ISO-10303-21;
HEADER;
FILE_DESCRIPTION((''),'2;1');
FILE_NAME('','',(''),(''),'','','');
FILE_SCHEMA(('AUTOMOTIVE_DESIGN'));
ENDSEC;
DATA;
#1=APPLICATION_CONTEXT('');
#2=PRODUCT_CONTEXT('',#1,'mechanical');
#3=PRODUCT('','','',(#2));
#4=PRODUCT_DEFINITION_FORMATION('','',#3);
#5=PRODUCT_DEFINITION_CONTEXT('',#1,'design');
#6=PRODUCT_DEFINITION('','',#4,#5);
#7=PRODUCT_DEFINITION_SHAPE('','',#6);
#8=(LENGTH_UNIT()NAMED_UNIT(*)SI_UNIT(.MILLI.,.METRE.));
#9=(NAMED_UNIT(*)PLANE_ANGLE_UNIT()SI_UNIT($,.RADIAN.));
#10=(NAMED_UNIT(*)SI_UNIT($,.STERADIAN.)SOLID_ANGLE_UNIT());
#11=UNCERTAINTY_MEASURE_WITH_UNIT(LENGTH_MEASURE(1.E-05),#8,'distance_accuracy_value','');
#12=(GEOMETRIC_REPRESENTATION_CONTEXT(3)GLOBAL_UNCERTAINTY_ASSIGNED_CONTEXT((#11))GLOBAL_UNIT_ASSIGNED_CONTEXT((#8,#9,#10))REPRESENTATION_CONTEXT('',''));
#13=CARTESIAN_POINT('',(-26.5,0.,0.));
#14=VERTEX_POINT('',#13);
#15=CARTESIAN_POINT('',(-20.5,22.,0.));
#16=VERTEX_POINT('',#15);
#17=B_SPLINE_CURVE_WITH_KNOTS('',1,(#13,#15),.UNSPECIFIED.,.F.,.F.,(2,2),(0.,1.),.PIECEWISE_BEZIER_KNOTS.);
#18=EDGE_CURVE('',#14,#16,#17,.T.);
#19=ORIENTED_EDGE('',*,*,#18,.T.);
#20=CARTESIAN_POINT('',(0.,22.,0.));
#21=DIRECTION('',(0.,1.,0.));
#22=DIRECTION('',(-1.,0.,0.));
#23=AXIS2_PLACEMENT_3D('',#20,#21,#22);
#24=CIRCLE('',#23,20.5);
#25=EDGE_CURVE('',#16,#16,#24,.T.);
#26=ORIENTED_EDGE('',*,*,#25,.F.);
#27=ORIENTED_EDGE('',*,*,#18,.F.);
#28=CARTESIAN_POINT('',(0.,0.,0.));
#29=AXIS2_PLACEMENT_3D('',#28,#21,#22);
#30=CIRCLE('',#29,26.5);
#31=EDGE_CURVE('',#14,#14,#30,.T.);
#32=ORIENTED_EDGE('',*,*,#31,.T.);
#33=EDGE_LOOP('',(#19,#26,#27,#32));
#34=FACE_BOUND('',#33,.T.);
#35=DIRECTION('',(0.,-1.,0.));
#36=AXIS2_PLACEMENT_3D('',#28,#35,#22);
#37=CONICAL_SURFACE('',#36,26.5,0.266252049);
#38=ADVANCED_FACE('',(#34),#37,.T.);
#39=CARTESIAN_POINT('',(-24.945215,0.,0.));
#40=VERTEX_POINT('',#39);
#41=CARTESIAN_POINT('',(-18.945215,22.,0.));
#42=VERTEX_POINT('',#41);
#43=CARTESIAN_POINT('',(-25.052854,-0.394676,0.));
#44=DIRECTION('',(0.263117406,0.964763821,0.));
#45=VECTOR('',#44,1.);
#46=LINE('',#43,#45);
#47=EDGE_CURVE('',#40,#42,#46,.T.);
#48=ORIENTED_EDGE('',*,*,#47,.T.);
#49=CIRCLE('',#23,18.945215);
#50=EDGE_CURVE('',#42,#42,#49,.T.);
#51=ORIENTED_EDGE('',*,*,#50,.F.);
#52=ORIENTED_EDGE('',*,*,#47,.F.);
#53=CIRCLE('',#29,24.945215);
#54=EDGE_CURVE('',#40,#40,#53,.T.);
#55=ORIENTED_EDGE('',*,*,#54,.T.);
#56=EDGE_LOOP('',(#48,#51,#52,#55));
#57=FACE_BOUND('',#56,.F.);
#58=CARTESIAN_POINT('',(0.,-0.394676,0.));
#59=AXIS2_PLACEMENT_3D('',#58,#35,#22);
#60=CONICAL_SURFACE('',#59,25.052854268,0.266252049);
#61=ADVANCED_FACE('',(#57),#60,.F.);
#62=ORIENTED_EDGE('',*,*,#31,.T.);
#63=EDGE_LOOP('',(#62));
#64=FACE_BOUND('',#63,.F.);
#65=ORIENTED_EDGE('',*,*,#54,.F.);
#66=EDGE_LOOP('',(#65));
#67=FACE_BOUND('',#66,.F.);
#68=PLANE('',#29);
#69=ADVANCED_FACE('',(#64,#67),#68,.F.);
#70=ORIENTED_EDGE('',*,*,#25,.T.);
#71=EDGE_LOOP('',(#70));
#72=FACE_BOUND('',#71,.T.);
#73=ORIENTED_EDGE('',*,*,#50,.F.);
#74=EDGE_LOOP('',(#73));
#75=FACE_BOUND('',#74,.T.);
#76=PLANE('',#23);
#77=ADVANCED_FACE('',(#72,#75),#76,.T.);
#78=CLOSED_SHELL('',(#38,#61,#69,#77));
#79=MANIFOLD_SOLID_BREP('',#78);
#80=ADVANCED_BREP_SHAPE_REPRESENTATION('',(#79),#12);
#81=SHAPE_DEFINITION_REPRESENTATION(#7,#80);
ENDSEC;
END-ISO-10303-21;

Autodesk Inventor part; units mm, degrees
ref_plane "YZ Plane" through (0, 0, 0) normal (1, 0, 0) x (0, 1, 0)
ref_plane "XY Plane" through (0, 0, 0) normal (0, 0, 1) x (1, 0, 0)
sketch "Szkic6" plane through (0, 0, 0) normal (0, 1, 0) x (-1, 0, 0)
  circle A0 centre (0, 0) radius 26.5
  dimension "d33" = 53
ref_plane "Płaszczyzna konstrukcyjna1" through (0, 22, 0) normal (0, 1, 0) x (-1, 0, 0)
sketch "Szkic7" plane through (0, 22, 0) normal (0, 1, 0) x (-1, 0, 0)
  circle A0 centre (0, 0) radius 20.5
  dimension "d35" = 41
loft "Wyciągnięcie złożone1" add profiles "Szkic6", "Szkic7"
shell "Skorupa1" thickness 1.5 removed faces 2 at (-3.5154, 22, 4.1371) at (-1.8199, 0, -2.5499)
equation "\"d33\" = OD1"
equation "\"d35\" = OD2"
equation "\"d52\" = THK"
equation "\"SzerokośćGięciaPodcięcia\" = Grubość"
equation "\"RozmiarPodcięciaNarożnika\" = 4 * Grubość"
equation "\"PromieńPrzejścia\" = PromieńGięcia"
equation "\"Rozmiar_promienia_Jacobiego\" = PromieńGięcia"
equation "\"Wielk_odstępu\" = Grubość"
equation "\"d2\" = PromieńGięcia"
equation "\"d23\" = PromieńGięcia"
equation "\"OD1\" = 53"
equation "\"OD2\" = 41"
equation "\"L\" = 22"
equation "\"THK\" = 1.5"
equation "\"d34\" = L"
equation "\"Grubość\" = 1.5"
equation "\"PromieńGięcia\" = 3"
properties part number "Redukcja symetryczna Ø53x41x1,5 L=22" material "304"
